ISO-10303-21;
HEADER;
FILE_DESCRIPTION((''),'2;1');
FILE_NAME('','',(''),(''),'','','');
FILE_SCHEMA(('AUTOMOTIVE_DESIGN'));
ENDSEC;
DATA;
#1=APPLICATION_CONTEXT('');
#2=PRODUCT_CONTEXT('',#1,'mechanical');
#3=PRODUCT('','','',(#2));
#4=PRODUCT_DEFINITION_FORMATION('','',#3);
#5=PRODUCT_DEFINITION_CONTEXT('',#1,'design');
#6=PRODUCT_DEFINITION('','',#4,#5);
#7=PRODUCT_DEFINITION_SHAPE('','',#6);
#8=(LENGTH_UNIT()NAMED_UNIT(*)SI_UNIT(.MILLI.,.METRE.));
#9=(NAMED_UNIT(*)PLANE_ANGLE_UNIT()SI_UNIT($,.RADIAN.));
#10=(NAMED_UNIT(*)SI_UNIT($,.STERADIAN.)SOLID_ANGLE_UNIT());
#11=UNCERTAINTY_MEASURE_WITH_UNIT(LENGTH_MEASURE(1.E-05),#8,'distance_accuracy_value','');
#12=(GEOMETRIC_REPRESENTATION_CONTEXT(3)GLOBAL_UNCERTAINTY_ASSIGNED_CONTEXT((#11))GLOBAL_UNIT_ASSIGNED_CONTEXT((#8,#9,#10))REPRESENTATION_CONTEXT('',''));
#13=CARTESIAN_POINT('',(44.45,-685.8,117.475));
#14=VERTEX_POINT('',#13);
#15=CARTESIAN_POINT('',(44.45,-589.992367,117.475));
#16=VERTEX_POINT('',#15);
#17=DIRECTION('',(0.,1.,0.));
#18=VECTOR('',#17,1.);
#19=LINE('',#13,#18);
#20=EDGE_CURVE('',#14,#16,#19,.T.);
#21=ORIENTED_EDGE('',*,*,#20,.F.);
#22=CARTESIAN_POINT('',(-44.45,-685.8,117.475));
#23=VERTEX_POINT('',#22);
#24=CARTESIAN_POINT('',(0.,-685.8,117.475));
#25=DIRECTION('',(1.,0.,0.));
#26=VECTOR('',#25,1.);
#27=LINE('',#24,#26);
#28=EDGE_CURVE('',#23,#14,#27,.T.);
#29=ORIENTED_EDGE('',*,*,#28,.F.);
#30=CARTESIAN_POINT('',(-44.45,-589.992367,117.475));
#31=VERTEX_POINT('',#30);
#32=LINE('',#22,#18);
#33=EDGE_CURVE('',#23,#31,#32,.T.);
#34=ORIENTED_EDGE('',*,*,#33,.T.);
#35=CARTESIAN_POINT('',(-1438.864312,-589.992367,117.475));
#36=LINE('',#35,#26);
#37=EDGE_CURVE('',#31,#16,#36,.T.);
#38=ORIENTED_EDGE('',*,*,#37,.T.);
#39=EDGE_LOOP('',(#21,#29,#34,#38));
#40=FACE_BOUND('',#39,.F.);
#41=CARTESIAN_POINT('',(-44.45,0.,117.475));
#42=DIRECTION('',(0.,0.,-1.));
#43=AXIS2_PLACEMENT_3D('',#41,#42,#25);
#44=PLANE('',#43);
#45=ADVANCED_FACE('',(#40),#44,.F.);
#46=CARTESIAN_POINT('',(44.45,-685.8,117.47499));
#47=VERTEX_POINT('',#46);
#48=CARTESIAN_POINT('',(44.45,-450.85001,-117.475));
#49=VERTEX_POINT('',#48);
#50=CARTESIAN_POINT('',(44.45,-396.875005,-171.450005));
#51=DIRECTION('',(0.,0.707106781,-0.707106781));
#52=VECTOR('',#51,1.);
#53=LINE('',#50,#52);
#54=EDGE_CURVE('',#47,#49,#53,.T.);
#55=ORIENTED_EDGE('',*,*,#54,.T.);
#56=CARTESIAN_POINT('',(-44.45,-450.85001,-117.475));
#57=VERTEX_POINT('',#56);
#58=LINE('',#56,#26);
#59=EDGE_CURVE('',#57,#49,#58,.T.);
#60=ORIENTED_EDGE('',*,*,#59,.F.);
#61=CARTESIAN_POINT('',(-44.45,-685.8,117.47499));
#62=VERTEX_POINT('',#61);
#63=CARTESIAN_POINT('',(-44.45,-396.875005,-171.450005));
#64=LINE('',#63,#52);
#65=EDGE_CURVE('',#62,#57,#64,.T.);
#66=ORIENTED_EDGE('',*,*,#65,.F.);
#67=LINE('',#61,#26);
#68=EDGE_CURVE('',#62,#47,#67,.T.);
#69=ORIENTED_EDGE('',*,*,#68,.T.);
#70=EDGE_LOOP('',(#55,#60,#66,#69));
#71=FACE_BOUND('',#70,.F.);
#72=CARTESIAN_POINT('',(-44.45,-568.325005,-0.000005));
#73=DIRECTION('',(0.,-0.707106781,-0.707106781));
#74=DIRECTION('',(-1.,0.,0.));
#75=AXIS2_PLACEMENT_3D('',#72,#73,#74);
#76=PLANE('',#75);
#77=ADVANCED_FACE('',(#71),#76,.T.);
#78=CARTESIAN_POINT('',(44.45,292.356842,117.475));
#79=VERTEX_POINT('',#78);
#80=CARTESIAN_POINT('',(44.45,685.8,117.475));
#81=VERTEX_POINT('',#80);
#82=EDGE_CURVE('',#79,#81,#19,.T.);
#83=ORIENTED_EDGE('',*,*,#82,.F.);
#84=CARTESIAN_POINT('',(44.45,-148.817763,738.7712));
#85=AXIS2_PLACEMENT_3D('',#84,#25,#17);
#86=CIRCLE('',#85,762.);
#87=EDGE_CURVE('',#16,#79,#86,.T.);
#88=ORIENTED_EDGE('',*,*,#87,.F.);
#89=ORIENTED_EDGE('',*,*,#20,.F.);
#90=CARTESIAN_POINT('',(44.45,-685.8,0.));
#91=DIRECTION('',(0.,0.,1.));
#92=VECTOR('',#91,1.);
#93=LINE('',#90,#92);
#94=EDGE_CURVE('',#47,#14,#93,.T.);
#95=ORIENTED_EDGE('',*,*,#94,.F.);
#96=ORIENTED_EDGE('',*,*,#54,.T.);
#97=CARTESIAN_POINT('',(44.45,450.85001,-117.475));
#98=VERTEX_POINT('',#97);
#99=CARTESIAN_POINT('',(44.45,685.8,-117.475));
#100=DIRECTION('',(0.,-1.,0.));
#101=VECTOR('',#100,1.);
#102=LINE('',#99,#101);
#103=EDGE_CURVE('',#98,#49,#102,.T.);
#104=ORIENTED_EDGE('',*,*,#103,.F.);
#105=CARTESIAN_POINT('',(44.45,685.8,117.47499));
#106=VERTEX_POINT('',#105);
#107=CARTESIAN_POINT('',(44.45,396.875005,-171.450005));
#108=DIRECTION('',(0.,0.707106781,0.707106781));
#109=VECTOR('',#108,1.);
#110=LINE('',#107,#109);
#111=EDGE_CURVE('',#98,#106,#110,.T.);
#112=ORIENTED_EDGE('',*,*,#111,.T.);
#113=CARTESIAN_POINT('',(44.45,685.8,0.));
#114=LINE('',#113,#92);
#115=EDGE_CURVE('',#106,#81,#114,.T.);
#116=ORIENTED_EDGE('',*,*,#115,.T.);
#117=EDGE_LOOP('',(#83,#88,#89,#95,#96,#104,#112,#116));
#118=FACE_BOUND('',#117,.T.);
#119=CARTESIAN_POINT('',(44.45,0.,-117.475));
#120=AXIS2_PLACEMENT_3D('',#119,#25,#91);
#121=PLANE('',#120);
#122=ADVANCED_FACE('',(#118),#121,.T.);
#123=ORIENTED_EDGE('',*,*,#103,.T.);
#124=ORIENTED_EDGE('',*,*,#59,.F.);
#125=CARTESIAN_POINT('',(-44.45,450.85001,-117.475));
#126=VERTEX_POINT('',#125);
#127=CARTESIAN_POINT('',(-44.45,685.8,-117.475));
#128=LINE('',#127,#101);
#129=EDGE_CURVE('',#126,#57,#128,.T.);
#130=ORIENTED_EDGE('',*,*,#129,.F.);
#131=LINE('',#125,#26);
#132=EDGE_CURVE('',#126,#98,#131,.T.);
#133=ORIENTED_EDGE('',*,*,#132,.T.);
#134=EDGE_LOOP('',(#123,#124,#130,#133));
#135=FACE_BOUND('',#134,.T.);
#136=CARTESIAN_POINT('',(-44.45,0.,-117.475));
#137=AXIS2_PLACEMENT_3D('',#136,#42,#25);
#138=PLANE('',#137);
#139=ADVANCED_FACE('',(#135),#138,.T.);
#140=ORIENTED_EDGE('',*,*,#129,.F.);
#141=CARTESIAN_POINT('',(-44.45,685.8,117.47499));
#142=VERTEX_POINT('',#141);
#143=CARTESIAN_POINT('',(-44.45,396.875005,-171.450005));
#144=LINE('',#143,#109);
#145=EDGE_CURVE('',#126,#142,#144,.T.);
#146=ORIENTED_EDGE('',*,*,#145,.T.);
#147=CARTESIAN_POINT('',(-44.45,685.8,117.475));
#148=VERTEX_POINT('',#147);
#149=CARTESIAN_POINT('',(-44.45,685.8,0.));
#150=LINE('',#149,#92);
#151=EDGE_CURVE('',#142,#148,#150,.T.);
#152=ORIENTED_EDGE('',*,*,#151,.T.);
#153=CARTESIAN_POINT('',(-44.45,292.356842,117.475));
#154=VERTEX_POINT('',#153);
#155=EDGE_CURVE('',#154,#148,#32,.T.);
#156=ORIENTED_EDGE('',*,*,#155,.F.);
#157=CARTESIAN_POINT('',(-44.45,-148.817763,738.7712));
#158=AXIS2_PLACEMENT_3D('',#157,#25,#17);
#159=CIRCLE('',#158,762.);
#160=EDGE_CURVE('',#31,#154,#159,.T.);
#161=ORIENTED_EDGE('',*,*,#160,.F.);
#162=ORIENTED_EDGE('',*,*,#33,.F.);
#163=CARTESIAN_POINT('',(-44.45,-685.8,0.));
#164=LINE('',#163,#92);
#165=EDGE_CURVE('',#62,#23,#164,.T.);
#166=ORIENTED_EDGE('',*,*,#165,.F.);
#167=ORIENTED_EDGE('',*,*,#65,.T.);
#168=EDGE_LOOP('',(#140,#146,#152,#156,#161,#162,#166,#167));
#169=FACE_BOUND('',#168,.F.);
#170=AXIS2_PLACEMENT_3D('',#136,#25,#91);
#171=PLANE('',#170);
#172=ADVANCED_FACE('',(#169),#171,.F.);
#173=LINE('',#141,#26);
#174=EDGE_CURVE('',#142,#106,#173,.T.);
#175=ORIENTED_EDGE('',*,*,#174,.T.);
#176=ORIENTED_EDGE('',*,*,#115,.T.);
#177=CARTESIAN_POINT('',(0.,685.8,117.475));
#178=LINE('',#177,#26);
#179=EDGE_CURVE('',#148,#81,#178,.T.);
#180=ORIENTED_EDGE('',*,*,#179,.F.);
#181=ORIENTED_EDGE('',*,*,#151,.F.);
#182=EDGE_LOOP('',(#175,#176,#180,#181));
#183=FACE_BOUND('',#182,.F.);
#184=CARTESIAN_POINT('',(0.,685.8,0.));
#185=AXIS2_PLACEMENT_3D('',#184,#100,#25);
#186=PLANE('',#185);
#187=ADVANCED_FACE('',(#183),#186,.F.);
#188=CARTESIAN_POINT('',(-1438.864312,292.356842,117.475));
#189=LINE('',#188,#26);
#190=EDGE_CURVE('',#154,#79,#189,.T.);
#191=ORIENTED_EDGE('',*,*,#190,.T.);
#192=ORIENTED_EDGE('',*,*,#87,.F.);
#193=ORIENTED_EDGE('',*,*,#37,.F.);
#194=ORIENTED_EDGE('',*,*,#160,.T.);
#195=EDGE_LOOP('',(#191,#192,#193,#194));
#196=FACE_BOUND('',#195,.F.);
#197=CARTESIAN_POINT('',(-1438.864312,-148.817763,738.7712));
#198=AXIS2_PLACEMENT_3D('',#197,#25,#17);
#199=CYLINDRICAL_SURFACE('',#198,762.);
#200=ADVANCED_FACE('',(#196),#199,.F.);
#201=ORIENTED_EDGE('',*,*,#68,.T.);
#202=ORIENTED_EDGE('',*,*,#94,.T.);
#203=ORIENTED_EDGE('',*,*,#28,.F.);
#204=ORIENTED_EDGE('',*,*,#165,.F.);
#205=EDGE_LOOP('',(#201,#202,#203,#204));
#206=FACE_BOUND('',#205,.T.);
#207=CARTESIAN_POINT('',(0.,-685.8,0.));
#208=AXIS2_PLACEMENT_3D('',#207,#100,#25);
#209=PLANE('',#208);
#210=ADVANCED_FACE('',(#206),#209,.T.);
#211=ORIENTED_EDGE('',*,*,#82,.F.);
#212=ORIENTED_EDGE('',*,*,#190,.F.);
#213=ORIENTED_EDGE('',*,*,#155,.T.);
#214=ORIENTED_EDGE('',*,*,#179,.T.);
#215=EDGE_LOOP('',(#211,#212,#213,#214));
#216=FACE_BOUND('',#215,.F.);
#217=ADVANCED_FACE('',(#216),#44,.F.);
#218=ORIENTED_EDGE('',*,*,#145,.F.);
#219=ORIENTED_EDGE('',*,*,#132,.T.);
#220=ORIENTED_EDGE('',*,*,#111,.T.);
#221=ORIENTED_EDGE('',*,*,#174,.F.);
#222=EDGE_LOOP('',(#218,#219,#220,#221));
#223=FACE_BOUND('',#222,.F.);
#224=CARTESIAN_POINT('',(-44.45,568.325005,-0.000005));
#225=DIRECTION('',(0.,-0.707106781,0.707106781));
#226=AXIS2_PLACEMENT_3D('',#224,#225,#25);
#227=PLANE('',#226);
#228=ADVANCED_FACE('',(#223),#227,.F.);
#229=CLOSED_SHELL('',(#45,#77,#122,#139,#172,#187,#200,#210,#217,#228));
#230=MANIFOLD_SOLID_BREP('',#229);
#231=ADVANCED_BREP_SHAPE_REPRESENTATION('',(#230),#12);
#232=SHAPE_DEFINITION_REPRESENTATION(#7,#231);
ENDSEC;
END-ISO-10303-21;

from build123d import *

# Parameters (mm, degrees)
F0_W     = 88.9
F0_H     = 234.95
F1_DEPTH = 685.8
F2_SIZE  = 234.94999
F3_SIZE  = 234.94999
F5_D     = 1524


# Not quite as in the source:
# - a fillet or chamfer is up to 0.001 mm smaller than in the source, because OpenCascade refuses the exact size


with BuildPart() as f1:
    # F0 (on Front) → F1 (new body, symmetric)
    with BuildSketch(Plane.XZ):
        Rectangle(F0_W, F0_H)
    extrude(amount=F1_DEPTH, both=True)

    # F2 (size 234.95 in the source; OpenCascade refuses exactly that, so slightly less here)
    f2_edges = [f1.edges().sort_by_distance(p)[0] for p in [
        (0, -685.8, -117.475),
    ]]
    chamfer(f2_edges, length=F2_SIZE)

    # F3 (size 234.95 in the source; OpenCascade refuses exactly that, so slightly less here)
    f3_edges = [f1.edges().sort_by_distance(p)[0] for p in [
        (0, 685.8, -117.475),
    ]]
    chamfer(f3_edges, length=F3_SIZE)

    # F5 (through all)
    with Locations(Plane(origin=(-44.45, 0, 0), x_dir=(0, -1, 0), z_dir=(-1, 0, 0))):
        with Locations((148.8177627325, 738.7712001801)):
            Hole(F5_D / 2)


solid = f1.part
